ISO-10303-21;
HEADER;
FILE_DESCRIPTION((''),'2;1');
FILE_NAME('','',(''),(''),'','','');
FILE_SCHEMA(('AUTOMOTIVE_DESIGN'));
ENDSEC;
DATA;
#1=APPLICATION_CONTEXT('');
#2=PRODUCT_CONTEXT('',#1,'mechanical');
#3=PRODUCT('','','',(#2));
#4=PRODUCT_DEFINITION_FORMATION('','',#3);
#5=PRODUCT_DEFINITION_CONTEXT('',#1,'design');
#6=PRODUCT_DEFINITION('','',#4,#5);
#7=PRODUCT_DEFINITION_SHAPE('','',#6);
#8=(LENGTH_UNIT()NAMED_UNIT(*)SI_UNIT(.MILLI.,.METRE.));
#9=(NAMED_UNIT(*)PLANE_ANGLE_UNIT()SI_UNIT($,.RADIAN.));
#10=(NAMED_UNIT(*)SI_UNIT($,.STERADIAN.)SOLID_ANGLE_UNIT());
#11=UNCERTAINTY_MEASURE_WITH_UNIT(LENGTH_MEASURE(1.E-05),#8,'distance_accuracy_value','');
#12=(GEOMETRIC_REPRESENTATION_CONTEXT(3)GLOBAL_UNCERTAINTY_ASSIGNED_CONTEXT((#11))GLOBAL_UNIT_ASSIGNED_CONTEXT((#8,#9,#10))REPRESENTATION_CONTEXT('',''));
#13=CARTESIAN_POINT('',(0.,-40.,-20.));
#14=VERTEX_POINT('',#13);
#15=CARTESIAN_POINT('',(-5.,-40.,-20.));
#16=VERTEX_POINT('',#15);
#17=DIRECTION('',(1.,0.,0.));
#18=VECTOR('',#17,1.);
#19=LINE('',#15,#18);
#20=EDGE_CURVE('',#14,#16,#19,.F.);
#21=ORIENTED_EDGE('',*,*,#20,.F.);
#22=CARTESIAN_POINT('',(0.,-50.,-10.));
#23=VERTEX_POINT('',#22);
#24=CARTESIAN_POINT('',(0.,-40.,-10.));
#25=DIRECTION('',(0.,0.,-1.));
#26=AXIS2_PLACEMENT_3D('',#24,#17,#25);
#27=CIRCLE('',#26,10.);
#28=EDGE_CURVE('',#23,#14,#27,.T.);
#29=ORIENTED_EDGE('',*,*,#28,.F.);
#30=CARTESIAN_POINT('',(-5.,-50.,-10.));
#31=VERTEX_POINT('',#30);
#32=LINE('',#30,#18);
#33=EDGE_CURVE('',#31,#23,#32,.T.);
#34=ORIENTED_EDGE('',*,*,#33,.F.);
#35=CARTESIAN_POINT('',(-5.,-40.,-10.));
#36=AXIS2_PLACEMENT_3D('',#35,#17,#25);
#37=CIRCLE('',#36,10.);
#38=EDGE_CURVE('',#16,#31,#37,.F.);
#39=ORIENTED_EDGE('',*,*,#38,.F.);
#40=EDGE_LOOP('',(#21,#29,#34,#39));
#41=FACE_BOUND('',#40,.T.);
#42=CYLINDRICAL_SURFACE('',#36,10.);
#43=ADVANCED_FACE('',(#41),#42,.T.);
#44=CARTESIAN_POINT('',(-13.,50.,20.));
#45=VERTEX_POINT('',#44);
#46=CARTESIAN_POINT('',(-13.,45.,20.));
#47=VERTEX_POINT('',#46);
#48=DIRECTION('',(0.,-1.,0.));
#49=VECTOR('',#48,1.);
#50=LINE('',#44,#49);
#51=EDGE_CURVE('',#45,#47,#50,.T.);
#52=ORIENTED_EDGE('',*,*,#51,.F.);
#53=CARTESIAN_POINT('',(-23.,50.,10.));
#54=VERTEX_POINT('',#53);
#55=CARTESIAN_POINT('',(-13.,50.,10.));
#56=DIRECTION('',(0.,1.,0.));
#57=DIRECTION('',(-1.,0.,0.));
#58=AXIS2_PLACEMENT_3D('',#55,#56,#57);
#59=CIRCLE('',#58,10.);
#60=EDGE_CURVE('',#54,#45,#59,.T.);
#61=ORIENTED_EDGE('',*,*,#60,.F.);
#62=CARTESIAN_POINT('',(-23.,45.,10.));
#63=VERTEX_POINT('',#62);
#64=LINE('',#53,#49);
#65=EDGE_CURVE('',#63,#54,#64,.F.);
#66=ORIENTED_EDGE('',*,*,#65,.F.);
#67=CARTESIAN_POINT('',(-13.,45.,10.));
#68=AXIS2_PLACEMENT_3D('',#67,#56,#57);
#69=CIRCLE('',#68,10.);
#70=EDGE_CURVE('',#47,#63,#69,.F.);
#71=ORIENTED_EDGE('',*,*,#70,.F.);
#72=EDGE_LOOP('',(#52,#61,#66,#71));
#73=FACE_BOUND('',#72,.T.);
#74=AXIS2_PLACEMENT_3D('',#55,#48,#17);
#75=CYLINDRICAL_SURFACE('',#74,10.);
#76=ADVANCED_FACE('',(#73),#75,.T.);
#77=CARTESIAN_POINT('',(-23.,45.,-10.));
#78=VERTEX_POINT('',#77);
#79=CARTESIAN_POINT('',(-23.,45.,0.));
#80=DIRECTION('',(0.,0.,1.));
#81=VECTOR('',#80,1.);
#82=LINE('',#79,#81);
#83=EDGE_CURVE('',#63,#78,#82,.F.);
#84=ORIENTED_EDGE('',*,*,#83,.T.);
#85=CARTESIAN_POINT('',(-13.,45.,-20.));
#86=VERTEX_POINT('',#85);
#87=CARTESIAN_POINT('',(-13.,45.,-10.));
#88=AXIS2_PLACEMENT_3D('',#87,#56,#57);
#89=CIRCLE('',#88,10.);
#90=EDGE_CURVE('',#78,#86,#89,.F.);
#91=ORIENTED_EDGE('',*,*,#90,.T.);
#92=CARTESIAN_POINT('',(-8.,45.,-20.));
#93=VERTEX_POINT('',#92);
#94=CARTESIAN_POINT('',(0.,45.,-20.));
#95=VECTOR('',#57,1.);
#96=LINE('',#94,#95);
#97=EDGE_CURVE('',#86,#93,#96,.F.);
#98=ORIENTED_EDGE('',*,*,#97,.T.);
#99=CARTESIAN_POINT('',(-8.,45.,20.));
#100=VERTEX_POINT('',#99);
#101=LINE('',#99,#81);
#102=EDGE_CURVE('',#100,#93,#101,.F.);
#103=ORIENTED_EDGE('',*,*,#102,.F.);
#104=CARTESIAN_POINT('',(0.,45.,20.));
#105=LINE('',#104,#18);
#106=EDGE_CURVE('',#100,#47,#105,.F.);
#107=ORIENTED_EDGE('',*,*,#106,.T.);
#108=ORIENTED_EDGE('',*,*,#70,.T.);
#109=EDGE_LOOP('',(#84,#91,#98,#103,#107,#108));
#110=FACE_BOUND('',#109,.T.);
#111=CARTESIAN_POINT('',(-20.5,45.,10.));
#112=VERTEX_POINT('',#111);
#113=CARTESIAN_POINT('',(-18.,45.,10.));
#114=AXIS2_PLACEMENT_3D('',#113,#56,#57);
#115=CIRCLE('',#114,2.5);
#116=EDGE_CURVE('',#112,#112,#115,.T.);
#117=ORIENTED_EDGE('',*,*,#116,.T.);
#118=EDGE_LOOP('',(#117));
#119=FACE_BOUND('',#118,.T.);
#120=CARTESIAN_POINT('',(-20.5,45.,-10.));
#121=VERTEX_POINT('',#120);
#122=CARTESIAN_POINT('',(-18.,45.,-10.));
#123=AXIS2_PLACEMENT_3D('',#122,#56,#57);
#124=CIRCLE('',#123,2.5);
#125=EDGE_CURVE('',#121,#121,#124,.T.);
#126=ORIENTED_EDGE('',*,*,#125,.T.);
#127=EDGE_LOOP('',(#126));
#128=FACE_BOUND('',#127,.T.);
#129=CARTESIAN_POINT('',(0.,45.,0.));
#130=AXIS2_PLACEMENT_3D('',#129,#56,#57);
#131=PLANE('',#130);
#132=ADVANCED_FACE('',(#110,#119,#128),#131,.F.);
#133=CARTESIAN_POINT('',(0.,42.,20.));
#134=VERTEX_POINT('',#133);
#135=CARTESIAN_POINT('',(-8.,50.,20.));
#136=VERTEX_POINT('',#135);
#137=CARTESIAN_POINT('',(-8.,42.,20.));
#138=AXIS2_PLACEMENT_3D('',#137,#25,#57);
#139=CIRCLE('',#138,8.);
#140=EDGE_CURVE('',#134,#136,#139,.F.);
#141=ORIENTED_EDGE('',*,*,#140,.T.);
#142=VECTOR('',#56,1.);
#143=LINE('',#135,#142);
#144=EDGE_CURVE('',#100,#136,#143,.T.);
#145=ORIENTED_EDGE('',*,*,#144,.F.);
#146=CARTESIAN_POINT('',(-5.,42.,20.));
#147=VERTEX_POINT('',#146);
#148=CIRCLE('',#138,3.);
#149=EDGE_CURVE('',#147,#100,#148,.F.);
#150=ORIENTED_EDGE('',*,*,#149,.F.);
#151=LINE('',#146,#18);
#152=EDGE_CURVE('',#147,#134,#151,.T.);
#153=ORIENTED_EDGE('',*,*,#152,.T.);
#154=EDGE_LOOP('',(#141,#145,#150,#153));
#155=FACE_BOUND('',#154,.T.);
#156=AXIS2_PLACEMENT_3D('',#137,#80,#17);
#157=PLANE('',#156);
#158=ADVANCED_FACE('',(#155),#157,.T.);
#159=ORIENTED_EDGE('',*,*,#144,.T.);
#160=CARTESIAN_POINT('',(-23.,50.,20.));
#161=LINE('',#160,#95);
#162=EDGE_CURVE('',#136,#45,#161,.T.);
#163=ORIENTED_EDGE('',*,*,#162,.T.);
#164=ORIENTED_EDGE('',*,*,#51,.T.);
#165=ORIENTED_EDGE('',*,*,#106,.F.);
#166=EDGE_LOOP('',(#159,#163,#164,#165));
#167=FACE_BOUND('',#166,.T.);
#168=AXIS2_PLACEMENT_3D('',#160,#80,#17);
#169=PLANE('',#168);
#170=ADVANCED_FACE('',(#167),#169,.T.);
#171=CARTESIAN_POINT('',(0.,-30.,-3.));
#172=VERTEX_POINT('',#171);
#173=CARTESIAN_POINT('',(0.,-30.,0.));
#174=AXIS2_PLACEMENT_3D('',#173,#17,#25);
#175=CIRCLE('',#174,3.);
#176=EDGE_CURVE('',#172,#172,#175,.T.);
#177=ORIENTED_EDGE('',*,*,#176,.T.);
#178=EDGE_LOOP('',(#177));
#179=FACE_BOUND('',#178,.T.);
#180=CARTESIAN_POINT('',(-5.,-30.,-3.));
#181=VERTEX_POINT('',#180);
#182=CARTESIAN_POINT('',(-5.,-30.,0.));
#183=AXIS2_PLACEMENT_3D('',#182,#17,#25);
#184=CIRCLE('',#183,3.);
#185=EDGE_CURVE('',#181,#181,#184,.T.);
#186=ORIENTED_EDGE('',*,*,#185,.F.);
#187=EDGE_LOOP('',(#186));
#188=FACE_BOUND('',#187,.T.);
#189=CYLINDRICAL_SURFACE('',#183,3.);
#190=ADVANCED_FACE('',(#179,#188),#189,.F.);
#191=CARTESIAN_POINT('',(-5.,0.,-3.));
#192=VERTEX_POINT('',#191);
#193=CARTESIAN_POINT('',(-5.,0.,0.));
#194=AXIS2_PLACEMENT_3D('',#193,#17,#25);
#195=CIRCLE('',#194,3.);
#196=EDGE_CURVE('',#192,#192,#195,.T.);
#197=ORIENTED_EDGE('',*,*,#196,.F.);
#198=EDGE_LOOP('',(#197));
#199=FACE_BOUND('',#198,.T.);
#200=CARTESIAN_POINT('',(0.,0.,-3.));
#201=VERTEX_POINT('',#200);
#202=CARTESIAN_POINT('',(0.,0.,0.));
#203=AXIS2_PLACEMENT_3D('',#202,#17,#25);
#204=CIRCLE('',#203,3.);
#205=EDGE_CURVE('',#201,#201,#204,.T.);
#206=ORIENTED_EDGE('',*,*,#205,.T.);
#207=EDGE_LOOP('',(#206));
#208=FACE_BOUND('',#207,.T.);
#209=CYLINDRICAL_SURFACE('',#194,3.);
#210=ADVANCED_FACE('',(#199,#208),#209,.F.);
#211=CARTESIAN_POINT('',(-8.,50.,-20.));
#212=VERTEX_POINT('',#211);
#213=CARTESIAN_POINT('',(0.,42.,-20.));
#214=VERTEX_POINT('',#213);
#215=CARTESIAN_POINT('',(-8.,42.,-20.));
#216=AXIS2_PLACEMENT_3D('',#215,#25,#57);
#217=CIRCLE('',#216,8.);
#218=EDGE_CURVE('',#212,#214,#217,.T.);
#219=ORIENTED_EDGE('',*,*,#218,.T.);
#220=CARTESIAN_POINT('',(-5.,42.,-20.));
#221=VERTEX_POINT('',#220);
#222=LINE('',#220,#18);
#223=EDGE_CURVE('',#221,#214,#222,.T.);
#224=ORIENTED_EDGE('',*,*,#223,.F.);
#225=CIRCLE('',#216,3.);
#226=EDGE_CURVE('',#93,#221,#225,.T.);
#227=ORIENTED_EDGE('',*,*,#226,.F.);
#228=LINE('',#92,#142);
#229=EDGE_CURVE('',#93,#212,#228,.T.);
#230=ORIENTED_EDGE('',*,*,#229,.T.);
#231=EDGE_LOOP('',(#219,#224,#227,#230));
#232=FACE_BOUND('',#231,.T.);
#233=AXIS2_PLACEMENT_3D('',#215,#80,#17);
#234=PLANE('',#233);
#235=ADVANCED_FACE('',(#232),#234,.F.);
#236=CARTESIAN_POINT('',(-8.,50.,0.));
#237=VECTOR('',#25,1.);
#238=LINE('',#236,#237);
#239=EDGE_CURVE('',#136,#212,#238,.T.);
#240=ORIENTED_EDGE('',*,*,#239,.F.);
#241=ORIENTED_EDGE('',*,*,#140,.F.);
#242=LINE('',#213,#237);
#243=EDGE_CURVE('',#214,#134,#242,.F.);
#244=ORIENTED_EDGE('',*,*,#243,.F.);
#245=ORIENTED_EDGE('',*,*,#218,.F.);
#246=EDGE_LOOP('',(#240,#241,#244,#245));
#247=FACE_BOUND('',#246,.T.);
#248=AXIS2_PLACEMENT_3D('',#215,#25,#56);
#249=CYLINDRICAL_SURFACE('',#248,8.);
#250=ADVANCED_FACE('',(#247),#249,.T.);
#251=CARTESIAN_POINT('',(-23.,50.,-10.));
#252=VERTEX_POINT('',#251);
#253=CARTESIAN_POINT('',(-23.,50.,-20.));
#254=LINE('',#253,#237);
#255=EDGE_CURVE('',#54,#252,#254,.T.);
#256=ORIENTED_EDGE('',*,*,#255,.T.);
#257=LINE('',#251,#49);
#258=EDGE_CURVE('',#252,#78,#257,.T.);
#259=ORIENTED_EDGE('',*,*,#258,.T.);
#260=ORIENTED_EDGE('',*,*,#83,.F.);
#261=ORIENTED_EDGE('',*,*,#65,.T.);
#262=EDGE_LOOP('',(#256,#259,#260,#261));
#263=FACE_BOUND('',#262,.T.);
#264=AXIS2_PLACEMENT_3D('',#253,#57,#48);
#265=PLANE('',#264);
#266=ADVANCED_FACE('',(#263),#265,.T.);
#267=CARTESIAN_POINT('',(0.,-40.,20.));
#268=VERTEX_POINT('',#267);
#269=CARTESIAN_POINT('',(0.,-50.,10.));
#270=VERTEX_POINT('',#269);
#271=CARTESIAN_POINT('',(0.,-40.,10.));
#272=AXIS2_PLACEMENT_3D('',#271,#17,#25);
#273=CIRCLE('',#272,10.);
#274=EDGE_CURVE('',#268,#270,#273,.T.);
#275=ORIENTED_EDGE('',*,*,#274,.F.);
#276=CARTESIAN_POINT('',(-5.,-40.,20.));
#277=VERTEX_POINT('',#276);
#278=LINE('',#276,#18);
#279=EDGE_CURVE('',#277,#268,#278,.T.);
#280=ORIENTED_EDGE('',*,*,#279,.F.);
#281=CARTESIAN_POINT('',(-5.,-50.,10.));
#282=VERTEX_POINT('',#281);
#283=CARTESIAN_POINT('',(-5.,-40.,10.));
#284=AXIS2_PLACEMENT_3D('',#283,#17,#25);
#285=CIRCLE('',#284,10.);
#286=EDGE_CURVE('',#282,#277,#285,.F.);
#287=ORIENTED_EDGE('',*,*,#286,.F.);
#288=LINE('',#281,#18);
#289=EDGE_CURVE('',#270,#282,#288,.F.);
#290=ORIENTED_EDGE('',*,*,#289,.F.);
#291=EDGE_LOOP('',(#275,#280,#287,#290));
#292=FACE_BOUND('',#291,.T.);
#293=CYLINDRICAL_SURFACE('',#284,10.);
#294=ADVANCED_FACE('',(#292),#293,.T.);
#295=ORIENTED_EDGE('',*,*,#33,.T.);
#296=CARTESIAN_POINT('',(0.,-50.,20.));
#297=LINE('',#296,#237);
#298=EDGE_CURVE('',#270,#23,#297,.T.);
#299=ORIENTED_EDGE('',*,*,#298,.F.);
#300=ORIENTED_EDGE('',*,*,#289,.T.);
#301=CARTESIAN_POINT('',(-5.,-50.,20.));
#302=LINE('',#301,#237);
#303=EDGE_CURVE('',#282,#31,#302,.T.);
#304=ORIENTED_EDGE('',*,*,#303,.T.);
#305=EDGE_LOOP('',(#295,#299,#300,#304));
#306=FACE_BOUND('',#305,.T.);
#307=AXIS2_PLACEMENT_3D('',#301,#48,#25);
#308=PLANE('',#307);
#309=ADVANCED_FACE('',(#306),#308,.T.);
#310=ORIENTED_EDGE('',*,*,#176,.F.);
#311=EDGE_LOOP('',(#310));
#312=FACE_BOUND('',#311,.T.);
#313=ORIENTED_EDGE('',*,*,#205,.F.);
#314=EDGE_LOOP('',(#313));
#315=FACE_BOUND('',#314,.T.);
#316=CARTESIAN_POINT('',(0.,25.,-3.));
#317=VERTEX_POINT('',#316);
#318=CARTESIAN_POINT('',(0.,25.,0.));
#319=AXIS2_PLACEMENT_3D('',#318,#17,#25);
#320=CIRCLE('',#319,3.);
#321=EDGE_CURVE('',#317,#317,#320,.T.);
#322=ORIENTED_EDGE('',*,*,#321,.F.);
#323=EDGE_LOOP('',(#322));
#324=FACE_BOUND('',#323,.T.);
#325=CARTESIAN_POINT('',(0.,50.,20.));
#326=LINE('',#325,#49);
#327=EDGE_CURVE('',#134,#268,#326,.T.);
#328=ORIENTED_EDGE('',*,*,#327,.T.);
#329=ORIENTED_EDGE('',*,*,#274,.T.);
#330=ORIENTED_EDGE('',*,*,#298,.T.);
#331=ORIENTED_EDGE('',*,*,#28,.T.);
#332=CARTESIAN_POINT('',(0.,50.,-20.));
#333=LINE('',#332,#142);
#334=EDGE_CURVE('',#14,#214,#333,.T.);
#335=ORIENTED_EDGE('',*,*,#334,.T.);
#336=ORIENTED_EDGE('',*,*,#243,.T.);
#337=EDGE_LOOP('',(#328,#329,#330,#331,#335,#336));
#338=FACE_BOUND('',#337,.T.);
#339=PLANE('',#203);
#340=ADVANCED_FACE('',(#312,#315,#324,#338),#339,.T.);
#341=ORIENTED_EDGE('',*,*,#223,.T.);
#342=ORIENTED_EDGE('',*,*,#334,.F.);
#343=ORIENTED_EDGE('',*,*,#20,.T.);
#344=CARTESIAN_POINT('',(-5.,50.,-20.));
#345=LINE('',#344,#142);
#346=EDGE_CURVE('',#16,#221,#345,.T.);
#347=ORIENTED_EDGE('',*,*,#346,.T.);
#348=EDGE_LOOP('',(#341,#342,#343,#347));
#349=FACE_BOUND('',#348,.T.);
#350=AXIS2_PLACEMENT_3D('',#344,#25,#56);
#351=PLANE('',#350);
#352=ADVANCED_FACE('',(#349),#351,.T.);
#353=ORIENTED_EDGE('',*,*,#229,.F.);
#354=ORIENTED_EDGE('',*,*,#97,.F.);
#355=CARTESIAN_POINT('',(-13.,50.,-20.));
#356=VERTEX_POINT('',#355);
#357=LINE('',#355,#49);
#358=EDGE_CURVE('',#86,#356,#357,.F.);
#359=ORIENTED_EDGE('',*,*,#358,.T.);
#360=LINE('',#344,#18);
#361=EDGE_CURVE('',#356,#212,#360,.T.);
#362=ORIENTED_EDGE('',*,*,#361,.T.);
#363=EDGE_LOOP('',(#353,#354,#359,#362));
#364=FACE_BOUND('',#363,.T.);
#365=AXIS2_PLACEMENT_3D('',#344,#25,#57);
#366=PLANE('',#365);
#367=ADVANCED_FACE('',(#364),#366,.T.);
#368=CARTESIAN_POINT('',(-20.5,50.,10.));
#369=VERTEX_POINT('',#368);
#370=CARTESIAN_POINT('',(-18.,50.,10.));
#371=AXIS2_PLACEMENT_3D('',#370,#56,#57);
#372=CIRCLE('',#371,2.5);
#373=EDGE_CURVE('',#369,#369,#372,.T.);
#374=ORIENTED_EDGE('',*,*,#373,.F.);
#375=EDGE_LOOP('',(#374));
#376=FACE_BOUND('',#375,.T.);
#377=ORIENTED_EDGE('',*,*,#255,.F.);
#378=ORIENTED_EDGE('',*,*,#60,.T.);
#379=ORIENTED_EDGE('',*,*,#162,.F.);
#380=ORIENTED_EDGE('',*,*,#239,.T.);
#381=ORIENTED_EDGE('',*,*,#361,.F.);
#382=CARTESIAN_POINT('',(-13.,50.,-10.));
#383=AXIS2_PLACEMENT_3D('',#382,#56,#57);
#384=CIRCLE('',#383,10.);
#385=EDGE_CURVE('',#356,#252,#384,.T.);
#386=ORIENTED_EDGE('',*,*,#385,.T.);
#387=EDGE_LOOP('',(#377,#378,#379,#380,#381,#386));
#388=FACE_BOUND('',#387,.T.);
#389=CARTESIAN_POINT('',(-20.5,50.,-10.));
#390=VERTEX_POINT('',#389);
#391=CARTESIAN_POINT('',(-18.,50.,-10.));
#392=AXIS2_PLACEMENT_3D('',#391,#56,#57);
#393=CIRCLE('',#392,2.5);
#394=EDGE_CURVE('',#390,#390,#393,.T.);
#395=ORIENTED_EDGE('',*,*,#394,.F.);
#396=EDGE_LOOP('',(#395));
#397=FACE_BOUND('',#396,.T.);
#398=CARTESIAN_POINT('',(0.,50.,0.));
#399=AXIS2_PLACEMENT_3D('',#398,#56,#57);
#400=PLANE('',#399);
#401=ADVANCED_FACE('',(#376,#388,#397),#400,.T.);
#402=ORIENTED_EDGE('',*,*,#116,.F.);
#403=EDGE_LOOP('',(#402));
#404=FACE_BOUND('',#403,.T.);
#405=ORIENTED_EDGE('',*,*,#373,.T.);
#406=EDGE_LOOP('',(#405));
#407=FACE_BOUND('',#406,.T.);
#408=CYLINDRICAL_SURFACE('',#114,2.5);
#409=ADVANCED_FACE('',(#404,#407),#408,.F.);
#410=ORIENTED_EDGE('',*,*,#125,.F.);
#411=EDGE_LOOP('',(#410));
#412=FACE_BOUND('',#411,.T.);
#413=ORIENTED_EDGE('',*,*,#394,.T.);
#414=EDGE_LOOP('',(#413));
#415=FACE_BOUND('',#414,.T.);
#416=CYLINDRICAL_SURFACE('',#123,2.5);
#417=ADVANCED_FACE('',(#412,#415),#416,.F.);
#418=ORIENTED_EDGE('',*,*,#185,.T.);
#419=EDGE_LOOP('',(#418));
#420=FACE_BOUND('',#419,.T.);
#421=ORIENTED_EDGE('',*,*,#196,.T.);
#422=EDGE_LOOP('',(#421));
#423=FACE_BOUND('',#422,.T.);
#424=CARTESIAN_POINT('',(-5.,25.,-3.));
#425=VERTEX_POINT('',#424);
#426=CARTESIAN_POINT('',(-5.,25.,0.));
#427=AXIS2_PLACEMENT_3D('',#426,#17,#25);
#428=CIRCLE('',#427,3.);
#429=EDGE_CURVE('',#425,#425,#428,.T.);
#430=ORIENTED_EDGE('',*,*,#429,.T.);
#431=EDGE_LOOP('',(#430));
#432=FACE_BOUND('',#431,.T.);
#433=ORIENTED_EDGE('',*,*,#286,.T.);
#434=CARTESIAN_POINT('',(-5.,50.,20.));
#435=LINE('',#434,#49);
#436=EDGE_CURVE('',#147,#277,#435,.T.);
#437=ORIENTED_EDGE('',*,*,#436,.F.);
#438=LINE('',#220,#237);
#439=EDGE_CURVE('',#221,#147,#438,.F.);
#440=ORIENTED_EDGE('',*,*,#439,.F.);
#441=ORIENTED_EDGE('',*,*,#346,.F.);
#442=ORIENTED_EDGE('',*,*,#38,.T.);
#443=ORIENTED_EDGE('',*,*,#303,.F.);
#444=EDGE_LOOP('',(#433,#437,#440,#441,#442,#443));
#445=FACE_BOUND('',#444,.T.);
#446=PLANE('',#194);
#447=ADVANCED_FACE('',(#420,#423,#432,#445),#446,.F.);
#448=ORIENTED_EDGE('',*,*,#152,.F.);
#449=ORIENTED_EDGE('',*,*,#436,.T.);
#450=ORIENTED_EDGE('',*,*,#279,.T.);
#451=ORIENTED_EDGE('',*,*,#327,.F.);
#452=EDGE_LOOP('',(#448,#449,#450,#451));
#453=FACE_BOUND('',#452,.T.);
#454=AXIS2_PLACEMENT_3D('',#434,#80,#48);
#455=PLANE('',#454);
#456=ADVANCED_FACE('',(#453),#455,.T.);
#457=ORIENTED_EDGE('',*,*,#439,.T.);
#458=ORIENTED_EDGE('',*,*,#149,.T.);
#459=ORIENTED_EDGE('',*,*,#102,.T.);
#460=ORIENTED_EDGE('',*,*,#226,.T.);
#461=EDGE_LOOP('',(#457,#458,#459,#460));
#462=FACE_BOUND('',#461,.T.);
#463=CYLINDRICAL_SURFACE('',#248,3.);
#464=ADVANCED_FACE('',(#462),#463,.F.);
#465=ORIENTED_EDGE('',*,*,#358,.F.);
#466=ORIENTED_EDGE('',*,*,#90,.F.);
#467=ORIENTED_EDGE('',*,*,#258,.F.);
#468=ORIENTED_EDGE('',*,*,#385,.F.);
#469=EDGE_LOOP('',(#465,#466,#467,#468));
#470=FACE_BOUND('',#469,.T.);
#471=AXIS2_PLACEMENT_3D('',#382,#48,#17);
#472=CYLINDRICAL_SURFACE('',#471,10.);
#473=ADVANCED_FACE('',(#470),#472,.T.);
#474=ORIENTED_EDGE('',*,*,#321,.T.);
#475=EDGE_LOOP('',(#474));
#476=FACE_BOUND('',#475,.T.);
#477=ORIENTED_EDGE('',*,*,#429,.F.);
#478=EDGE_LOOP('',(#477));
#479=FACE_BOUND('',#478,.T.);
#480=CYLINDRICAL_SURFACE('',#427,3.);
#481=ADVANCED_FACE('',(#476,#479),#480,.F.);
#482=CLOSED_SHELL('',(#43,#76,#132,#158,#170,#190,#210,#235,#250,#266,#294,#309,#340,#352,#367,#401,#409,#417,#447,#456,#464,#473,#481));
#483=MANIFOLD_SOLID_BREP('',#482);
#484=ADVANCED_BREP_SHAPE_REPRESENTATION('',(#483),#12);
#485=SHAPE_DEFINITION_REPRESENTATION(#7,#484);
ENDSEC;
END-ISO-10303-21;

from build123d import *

# Parameters (mm, degrees)
SKETCH1_W                    = 40
SKETCH1_H                    = 100
BASE_FLANGE1_DEPTH           = 5
EDGE_FLANGE1_STRIP_W         = 26
EDGE_FLANGE1_STRIP_H         = 5
EDGE_FLANGE1_STRIP_CUT_DEPTH = 40
EDGE_FLANGE1_DEPTH           = 40
SKETCH9_R                    = 2.5
CUT_EXTRUDE1_DEPTH           = 10
FILLET1_R                    = 10
SKETCH16_R                   = 3
CUT_EXTRUDE2_DEPTH           = 10


# Sheet-metal steps are written as plain solids
with BuildPart() as part:
    # Sketch1 → Base-Flange1 (new body)
    with BuildSketch(Plane(origin=(0, 0, 0), x_dir=(0, 0, -1), z_dir=(1, 0, 0))):
        Rectangle(SKETCH1_W, SKETCH1_H)
    extrude(amount=-BASE_FLANGE1_DEPTH)

    # Edge-Flange1 strip (across the edge) → Edge-Flange1 strip cut (cut)
    with BuildSketch(Plane(origin=(-5, 50, 20), x_dir=(0, -1, 0), z_dir=(0, 0, -1))):
        with Locations((-5, -2.5)):
            Rectangle(EDGE_FLANGE1_STRIP_W, EDGE_FLANGE1_STRIP_H)
    extrude(amount=EDGE_FLANGE1_STRIP_CUT_DEPTH, mode=Mode.SUBTRACT)

    # Edge-Flange1 section (across the edge) → Edge-Flange1 (add)
    with BuildSketch(Plane(origin=(-5, 50, 20), x_dir=(0, -1, 0), z_dir=(0, 0, -1))):
        with BuildLine():
            Line((0, 3), (0, 18))
            Line((0, 18), (5, 18))
            Line((5, 18), (5, 3))
            ThreePointArc((5, 3), (5.878679656, 0.878679656), (8, 0))
            Line((8, 0), (8, -5))
            ThreePointArc((8, -5), (2.343145751, -2.656854249), (0, 3))
        make_face()
    extrude(amount=EDGE_FLANGE1_DEPTH)

    # Sketch9 → Cut-Extrude1 (cut)
    with BuildSketch(Plane(origin=(0, 50, 0), x_dir=(1, 0, 0), z_dir=(0, 1, 0))):
        with Locations(Location((-18, 10, 0), (0, 0, 180))):
            Circle(SKETCH9_R)
        with Locations(Location((-18, -10, 0), (0, 0, 180))):
            Circle(SKETCH9_R)
    extrude(amount=-CUT_EXTRUDE1_DEPTH, mode=Mode.SUBTRACT)

    # Fillet1
    fillet1_edges = [part.edges().sort_by_distance(p)[0] for p in [
        (-23, 47.5, 20),
        (-23, 47.5, -20),
        (-2.5, -50, -20),
        (-2.5, -50, 20),
    ]]
    fillet(fillet1_edges, radius=FILLET1_R)

    # Sketch16 → Cut-Extrude2 (cut)
    with BuildSketch(Plane(origin=(0, 0, 0), x_dir=(0, 0, -1), z_dir=(1, 0, 0))):
        Circle(SKETCH16_R)
        with Locations((0, -30)):
            Circle(SKETCH16_R)
        with Locations((0, 25)):
            Circle(SKETCH16_R)
    extrude(amount=-CUT_EXTRUDE2_DEPTH, mode=Mode.SUBTRACT)


solid = part.part
